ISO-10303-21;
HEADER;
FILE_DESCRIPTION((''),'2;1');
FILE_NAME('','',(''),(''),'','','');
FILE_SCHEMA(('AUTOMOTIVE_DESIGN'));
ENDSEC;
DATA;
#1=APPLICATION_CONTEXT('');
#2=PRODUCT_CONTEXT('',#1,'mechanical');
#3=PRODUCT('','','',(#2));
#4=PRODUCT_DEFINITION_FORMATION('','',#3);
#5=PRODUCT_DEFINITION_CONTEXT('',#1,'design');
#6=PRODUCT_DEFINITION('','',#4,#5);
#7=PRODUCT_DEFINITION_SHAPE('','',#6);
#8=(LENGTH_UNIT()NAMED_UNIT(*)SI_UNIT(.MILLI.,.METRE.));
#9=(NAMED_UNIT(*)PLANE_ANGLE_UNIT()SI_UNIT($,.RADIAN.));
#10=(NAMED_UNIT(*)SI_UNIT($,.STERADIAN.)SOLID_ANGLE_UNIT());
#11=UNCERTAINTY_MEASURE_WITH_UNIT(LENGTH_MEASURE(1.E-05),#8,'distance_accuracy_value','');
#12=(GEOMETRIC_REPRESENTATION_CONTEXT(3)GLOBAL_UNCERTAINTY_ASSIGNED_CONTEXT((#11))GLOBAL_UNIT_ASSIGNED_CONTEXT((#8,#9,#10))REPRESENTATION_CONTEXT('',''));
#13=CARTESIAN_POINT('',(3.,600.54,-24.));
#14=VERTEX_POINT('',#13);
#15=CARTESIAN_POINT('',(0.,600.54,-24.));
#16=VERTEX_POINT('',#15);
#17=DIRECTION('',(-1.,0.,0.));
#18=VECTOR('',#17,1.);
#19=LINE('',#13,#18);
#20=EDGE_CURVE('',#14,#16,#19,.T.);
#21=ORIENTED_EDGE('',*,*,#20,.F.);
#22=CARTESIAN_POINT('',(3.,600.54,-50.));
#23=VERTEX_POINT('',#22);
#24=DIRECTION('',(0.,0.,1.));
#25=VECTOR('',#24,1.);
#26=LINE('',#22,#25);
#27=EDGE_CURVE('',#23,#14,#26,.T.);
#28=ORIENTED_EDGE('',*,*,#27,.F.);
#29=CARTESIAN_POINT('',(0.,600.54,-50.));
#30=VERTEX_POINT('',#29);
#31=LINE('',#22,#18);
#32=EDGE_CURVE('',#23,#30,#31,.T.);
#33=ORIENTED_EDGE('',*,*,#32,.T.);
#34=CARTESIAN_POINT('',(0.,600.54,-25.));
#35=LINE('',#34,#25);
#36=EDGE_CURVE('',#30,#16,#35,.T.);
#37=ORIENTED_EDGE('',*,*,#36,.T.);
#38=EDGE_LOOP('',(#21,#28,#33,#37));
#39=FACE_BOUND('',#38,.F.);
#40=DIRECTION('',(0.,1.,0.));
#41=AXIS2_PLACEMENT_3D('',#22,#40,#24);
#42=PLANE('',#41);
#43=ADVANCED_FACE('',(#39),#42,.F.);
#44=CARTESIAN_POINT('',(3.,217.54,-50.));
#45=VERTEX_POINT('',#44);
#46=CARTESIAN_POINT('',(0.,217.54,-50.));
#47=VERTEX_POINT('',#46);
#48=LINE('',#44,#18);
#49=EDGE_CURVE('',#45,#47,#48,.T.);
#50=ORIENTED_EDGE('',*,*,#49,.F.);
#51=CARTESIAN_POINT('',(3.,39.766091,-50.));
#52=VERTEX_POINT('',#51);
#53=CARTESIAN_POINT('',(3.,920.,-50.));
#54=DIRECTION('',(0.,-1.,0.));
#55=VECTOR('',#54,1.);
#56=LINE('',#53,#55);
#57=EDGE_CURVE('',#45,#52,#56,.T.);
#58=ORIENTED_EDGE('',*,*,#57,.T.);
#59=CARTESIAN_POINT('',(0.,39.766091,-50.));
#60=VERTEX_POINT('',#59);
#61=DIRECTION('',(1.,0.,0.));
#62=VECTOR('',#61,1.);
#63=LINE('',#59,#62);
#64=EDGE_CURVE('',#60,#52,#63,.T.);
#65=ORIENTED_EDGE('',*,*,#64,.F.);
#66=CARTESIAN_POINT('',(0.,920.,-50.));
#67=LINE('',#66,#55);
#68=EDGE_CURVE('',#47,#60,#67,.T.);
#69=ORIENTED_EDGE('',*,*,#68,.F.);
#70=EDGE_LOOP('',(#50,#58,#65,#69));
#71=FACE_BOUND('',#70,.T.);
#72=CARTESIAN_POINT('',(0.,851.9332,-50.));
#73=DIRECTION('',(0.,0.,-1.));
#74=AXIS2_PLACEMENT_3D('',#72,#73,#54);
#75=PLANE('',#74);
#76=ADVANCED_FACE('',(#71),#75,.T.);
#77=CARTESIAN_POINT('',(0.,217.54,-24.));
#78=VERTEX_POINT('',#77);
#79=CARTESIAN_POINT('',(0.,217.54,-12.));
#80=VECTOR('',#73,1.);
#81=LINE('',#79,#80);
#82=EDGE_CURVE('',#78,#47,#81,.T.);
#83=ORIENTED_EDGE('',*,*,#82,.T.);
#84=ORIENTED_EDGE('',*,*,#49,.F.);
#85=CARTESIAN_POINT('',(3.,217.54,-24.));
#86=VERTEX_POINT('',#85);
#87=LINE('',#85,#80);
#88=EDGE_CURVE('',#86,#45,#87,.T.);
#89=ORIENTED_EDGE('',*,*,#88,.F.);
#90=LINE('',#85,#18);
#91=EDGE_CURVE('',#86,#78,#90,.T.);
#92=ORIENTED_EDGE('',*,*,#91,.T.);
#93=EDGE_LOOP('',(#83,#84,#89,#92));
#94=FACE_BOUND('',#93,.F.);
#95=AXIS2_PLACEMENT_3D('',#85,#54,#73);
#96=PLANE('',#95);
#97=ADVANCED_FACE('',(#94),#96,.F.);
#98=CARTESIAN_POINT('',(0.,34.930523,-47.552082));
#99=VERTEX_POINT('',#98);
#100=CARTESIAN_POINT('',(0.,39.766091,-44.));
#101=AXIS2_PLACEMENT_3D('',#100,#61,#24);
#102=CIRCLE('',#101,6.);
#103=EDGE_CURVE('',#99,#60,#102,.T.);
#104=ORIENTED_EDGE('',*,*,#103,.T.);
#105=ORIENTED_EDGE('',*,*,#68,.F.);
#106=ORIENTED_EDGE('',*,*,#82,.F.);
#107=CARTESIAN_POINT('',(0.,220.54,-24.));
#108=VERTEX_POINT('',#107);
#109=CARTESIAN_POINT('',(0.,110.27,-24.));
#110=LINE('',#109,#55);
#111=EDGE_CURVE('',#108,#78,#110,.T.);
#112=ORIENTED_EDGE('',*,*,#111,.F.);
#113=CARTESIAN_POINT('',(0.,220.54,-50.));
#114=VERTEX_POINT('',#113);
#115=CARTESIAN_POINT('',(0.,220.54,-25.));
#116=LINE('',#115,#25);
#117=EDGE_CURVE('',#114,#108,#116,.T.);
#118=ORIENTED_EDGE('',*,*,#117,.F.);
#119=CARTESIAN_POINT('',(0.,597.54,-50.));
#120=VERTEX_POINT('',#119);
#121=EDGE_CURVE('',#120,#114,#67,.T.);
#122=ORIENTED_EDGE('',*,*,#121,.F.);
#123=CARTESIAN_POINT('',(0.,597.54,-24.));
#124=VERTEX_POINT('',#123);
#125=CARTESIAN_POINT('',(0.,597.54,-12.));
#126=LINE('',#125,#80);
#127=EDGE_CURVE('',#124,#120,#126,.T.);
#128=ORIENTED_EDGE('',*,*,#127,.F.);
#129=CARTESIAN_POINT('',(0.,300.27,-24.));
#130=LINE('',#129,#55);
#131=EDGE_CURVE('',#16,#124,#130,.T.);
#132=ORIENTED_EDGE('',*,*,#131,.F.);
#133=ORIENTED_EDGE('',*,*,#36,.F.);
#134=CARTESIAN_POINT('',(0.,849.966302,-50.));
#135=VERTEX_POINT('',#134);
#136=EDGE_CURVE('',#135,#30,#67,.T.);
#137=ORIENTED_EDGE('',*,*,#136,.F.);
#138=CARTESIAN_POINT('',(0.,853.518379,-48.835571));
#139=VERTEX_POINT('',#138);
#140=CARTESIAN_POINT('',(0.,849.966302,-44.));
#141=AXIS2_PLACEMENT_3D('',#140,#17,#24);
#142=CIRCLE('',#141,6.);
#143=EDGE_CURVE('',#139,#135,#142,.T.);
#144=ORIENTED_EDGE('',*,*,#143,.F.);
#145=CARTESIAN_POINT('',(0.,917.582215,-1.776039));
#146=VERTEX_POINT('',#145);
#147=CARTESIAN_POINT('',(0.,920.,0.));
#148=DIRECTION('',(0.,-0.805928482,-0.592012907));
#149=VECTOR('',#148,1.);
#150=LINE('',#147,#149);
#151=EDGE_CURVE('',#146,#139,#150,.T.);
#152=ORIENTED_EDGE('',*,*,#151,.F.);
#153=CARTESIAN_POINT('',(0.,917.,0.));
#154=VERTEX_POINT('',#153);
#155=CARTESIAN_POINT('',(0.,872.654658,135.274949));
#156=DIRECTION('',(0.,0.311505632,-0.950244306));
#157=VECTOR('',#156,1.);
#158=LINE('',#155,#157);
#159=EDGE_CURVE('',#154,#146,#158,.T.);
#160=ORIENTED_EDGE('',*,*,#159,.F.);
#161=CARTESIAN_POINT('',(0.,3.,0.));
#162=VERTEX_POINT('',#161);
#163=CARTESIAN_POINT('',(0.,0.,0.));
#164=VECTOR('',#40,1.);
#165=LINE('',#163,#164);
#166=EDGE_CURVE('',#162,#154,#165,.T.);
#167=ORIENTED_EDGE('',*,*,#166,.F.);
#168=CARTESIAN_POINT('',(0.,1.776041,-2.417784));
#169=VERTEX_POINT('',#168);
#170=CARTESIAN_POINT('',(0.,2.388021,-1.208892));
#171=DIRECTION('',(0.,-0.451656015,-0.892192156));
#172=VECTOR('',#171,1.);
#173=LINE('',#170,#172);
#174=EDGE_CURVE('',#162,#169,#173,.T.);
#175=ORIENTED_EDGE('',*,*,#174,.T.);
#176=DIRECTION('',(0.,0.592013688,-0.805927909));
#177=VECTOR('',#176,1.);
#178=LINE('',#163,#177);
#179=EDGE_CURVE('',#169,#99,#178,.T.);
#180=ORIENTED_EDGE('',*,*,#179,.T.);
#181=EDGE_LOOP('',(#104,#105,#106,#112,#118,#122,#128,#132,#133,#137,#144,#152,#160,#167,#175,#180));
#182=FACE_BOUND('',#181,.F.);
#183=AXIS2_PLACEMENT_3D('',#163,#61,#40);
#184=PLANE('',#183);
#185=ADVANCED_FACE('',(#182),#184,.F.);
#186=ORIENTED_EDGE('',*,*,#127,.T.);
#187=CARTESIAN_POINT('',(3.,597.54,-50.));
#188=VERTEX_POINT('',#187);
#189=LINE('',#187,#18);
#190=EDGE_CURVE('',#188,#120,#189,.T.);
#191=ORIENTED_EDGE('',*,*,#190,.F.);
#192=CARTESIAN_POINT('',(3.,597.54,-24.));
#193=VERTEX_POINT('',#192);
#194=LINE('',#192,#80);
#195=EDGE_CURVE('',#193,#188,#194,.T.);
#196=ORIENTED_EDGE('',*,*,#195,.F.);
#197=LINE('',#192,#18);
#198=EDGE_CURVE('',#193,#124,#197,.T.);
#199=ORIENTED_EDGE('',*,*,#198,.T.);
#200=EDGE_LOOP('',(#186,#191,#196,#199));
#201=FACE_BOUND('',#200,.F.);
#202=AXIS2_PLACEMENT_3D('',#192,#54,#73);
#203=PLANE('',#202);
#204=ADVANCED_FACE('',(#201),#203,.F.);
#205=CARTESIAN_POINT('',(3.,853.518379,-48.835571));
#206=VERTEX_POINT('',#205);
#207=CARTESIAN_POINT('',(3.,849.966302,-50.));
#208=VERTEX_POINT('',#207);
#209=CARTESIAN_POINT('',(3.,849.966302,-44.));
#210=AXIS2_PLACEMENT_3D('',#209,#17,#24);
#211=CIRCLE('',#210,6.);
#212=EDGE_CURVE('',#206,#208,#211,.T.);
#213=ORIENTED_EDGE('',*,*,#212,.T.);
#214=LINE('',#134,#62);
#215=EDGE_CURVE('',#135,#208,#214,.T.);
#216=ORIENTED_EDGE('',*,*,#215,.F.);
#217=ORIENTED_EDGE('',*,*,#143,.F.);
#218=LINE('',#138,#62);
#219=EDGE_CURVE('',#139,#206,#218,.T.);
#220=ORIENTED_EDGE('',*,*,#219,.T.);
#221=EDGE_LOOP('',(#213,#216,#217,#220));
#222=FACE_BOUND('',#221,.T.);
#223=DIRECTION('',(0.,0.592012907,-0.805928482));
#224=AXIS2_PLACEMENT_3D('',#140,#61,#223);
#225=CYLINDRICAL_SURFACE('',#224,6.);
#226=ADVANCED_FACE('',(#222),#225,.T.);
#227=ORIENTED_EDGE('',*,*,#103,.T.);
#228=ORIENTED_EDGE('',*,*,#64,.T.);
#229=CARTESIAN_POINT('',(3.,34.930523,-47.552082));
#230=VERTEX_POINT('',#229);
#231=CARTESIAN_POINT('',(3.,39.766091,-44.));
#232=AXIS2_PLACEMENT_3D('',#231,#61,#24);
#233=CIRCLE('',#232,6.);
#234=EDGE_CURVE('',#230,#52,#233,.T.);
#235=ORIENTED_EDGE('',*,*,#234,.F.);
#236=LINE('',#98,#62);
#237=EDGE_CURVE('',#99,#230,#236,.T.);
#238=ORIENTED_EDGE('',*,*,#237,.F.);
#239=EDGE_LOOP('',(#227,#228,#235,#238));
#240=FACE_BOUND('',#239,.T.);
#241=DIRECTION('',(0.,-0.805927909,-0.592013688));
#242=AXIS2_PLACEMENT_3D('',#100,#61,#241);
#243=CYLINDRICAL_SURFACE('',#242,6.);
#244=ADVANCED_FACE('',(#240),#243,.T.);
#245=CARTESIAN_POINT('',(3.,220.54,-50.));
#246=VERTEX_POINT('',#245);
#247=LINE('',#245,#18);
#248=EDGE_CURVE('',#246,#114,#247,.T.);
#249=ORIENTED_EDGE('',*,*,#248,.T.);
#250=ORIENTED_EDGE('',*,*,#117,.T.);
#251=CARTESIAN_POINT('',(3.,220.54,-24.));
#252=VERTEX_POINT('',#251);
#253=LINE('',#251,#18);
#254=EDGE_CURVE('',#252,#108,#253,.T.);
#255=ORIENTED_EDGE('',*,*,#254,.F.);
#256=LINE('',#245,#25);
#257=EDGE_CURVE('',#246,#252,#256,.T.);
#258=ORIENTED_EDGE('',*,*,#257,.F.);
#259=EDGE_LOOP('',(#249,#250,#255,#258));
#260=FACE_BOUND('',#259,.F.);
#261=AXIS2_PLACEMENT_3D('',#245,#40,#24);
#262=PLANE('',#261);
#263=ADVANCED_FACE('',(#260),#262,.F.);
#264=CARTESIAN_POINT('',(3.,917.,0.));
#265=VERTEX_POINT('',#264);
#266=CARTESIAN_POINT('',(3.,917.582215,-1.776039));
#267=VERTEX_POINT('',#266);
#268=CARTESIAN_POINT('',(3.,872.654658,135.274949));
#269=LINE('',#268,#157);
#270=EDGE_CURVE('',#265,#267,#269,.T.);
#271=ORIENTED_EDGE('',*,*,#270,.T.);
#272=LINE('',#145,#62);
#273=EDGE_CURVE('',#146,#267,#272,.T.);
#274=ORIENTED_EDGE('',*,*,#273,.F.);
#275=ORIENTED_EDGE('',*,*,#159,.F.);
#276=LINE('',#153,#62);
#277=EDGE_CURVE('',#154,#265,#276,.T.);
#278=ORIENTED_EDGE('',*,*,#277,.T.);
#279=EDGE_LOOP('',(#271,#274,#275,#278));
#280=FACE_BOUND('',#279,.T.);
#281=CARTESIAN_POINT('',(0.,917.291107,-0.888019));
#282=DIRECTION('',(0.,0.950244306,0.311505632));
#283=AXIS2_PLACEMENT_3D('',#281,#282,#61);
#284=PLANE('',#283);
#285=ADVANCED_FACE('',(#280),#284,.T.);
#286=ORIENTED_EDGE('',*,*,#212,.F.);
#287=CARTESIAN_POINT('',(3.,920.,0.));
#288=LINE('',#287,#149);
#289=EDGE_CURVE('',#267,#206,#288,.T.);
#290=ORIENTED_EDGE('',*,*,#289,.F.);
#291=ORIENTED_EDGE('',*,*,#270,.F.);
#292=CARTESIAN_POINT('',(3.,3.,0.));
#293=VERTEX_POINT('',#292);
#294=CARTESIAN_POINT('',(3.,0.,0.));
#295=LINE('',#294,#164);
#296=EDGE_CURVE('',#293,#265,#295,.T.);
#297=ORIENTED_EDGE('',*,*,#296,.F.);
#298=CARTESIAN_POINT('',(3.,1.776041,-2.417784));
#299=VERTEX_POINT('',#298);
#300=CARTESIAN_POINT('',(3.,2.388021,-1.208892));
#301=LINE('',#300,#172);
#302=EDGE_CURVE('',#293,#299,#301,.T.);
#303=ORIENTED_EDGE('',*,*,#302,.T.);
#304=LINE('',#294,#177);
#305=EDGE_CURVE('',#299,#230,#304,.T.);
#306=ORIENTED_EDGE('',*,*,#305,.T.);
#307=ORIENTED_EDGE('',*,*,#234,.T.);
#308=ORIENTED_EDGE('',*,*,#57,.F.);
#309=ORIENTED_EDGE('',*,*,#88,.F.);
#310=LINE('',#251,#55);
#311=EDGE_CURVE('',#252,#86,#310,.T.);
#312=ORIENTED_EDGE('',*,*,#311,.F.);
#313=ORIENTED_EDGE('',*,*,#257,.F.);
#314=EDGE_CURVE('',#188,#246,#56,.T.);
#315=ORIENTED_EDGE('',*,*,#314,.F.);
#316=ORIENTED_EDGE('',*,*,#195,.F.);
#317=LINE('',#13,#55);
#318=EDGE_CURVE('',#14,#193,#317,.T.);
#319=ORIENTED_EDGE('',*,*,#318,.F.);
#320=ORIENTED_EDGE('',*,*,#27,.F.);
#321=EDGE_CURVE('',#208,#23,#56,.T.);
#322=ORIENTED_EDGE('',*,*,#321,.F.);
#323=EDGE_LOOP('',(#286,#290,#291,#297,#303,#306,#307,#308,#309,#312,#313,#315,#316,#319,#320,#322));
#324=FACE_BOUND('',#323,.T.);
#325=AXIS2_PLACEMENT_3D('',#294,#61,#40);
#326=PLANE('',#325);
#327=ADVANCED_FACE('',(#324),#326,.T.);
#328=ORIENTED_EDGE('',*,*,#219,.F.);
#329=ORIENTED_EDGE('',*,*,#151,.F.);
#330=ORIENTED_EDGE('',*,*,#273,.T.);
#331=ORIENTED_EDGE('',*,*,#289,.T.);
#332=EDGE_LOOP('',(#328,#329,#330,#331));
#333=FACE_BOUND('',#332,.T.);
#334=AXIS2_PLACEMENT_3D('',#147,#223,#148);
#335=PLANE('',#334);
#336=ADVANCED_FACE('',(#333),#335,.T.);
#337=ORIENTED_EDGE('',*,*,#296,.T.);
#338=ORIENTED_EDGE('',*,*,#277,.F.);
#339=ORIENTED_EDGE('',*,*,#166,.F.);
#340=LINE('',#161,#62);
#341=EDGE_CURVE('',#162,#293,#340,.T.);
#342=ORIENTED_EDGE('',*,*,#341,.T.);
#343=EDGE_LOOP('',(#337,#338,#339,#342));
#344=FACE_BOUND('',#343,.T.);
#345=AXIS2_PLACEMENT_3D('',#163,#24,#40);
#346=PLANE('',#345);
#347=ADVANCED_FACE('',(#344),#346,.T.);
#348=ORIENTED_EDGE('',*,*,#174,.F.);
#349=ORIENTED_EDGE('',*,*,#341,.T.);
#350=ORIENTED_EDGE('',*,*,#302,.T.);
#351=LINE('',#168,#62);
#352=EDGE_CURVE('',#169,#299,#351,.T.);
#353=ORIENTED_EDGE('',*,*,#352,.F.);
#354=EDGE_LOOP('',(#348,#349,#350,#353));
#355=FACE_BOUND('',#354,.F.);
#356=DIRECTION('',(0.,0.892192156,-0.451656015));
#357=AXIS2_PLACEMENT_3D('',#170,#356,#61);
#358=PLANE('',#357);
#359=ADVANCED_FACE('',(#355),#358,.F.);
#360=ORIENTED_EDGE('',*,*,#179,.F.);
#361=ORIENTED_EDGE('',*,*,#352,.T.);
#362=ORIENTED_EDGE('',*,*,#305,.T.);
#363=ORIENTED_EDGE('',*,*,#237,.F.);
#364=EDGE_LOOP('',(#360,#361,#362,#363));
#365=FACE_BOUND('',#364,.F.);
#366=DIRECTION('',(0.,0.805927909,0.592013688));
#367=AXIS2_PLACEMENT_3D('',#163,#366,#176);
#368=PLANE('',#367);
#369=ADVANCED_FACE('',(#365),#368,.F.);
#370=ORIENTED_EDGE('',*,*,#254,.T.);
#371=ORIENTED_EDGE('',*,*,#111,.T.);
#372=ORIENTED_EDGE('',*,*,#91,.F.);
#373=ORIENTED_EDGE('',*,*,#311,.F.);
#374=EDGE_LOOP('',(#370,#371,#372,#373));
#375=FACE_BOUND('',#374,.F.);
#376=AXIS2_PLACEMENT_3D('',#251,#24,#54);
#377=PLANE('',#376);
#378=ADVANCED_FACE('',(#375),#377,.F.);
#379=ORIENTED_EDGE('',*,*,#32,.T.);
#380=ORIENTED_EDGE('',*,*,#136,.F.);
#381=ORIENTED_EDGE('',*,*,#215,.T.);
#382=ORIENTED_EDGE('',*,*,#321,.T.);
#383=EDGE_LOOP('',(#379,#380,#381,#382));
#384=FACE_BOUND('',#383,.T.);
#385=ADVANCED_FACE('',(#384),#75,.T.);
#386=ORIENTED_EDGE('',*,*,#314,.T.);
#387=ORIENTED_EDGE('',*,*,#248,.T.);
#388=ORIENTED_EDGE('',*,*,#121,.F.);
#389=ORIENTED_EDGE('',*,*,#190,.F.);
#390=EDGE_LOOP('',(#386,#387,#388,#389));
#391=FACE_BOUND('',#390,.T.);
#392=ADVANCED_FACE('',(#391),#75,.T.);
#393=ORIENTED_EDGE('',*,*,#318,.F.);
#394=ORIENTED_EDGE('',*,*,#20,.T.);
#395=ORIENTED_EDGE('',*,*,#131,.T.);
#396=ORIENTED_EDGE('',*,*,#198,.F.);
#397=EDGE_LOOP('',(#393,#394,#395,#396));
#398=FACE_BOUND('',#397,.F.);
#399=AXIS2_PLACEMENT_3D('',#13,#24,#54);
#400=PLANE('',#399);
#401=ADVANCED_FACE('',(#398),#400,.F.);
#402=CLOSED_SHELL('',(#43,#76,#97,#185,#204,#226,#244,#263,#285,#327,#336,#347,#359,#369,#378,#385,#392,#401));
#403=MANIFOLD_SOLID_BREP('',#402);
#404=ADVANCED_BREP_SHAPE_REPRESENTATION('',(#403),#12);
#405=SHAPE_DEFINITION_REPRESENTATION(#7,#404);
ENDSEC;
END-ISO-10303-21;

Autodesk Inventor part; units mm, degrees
ref_plane "YZ Plane" through (0, 0, 0) normal (1, 0, 0) x (0, 1, 0)
ref_plane "XZ Plane" through (0, 0, 0) normal (0, 1, 0) x (-1, 0, 0)
ref_plane "XY Plane" through (0, 0, 0) normal (0, 0, 1) x (1, 0, 0)
sketch "Sketch2" plane through (0, 0, 0) normal (1, 0, 0) x (0, 1, 0)
  line L0 (0, 0) -> (920, 0)
  line L1 (920, 0) -> (920, -50)
  line L2 (920, -50) -> (0, -50)
  line L3 (0, -50) -> (0, 0)
  line L4 (920, -50) -> (883.2713, 0) construction
  line L5 (920, 0) -> (851.9332, -50)
  line L6 (0, 0) -> (36.7287, -50)
  dimension "d28" = 920
  dimension "d29" = 50
  dimension "d31" = 36.3
  dimension "d32" = 53.7
  dimension "d36" = 53.7
extrude "Plate2" add sketch "Sketch2" along normal blind 3 contours L0 L5 L2 L6
chamfer "Corner Chamfer1" distance 3 angle 45 2 edges at (1.5, 920, 0) (1.5, 0, 0)
fillet "Corner Round1" radius 6 2 edges at (1.5, 36.7287, -50) (1.5, 851.9332, -50)
sketch "Sketch3" plane through (3, 0, 0) normal (1, 0, 0) x (0, 0, -1)
  line L0 (24, 217.54) -> (50, 217.54)
  line L1 (50, 217.54) -> (50, 220.54)
  line L2 (50, 220.54) -> (24, 220.54)
  line L3 (24, 220.54) -> (24, 217.54)
  line L4 (50, 849.9663) -> (50, 39.766) projected
  line L5 (50, 219.04) -> (0, 219.04) construction
  line L6 (0, 3) -> (0, 917) projected
  line L7 (50, 599.04) -> (0, 599.04) construction
  line L8 (24, 597.54) -> (50, 597.54)
  line L9 (50, 597.54) -> (50, 600.54)
  line L10 (50, 600.54) -> (24, 600.54)
  line L11 (24, 600.54) -> (24, 597.54)
  point P0 (0, 0)
  dimension "d39" = 26
  dimension "d40" = 3
  dimension "d41" = 219.04
  dimension "d42" = 599.04
  dimension "d43" = 3
  dimension "d44" = 26
extrude "Extrusion1" cut sketch "Sketch3" against normal through all
equation "\"d36\" = d32"
equation "\"d40\" = Thickness"
equation "\"d43\" = Thickness"
equation "\"d44\" = d39"
equation "\"d30\" = Thickness"
equation "\"BendReliefWidth\" = Thickness"
equation "\"BendReliefDepth\" = 0.5 * Thickness"
equation "\"CornerReliefSize\" = 4 * Thickness"
equation "\"MinimumRemnant\" = 2 * Thickness"
equation "\"TransitionRadius\" = BendRadius"
equation "\"JacobiRadiusSize\" = BendRadius"
equation "\"GapSize\" = Thickness"
equation "\"Thickness\" = 3"
equation "\"BendRadius\" = 5"
properties part number "MSC 010.5 stringer cone" material "Stainless Steel"
